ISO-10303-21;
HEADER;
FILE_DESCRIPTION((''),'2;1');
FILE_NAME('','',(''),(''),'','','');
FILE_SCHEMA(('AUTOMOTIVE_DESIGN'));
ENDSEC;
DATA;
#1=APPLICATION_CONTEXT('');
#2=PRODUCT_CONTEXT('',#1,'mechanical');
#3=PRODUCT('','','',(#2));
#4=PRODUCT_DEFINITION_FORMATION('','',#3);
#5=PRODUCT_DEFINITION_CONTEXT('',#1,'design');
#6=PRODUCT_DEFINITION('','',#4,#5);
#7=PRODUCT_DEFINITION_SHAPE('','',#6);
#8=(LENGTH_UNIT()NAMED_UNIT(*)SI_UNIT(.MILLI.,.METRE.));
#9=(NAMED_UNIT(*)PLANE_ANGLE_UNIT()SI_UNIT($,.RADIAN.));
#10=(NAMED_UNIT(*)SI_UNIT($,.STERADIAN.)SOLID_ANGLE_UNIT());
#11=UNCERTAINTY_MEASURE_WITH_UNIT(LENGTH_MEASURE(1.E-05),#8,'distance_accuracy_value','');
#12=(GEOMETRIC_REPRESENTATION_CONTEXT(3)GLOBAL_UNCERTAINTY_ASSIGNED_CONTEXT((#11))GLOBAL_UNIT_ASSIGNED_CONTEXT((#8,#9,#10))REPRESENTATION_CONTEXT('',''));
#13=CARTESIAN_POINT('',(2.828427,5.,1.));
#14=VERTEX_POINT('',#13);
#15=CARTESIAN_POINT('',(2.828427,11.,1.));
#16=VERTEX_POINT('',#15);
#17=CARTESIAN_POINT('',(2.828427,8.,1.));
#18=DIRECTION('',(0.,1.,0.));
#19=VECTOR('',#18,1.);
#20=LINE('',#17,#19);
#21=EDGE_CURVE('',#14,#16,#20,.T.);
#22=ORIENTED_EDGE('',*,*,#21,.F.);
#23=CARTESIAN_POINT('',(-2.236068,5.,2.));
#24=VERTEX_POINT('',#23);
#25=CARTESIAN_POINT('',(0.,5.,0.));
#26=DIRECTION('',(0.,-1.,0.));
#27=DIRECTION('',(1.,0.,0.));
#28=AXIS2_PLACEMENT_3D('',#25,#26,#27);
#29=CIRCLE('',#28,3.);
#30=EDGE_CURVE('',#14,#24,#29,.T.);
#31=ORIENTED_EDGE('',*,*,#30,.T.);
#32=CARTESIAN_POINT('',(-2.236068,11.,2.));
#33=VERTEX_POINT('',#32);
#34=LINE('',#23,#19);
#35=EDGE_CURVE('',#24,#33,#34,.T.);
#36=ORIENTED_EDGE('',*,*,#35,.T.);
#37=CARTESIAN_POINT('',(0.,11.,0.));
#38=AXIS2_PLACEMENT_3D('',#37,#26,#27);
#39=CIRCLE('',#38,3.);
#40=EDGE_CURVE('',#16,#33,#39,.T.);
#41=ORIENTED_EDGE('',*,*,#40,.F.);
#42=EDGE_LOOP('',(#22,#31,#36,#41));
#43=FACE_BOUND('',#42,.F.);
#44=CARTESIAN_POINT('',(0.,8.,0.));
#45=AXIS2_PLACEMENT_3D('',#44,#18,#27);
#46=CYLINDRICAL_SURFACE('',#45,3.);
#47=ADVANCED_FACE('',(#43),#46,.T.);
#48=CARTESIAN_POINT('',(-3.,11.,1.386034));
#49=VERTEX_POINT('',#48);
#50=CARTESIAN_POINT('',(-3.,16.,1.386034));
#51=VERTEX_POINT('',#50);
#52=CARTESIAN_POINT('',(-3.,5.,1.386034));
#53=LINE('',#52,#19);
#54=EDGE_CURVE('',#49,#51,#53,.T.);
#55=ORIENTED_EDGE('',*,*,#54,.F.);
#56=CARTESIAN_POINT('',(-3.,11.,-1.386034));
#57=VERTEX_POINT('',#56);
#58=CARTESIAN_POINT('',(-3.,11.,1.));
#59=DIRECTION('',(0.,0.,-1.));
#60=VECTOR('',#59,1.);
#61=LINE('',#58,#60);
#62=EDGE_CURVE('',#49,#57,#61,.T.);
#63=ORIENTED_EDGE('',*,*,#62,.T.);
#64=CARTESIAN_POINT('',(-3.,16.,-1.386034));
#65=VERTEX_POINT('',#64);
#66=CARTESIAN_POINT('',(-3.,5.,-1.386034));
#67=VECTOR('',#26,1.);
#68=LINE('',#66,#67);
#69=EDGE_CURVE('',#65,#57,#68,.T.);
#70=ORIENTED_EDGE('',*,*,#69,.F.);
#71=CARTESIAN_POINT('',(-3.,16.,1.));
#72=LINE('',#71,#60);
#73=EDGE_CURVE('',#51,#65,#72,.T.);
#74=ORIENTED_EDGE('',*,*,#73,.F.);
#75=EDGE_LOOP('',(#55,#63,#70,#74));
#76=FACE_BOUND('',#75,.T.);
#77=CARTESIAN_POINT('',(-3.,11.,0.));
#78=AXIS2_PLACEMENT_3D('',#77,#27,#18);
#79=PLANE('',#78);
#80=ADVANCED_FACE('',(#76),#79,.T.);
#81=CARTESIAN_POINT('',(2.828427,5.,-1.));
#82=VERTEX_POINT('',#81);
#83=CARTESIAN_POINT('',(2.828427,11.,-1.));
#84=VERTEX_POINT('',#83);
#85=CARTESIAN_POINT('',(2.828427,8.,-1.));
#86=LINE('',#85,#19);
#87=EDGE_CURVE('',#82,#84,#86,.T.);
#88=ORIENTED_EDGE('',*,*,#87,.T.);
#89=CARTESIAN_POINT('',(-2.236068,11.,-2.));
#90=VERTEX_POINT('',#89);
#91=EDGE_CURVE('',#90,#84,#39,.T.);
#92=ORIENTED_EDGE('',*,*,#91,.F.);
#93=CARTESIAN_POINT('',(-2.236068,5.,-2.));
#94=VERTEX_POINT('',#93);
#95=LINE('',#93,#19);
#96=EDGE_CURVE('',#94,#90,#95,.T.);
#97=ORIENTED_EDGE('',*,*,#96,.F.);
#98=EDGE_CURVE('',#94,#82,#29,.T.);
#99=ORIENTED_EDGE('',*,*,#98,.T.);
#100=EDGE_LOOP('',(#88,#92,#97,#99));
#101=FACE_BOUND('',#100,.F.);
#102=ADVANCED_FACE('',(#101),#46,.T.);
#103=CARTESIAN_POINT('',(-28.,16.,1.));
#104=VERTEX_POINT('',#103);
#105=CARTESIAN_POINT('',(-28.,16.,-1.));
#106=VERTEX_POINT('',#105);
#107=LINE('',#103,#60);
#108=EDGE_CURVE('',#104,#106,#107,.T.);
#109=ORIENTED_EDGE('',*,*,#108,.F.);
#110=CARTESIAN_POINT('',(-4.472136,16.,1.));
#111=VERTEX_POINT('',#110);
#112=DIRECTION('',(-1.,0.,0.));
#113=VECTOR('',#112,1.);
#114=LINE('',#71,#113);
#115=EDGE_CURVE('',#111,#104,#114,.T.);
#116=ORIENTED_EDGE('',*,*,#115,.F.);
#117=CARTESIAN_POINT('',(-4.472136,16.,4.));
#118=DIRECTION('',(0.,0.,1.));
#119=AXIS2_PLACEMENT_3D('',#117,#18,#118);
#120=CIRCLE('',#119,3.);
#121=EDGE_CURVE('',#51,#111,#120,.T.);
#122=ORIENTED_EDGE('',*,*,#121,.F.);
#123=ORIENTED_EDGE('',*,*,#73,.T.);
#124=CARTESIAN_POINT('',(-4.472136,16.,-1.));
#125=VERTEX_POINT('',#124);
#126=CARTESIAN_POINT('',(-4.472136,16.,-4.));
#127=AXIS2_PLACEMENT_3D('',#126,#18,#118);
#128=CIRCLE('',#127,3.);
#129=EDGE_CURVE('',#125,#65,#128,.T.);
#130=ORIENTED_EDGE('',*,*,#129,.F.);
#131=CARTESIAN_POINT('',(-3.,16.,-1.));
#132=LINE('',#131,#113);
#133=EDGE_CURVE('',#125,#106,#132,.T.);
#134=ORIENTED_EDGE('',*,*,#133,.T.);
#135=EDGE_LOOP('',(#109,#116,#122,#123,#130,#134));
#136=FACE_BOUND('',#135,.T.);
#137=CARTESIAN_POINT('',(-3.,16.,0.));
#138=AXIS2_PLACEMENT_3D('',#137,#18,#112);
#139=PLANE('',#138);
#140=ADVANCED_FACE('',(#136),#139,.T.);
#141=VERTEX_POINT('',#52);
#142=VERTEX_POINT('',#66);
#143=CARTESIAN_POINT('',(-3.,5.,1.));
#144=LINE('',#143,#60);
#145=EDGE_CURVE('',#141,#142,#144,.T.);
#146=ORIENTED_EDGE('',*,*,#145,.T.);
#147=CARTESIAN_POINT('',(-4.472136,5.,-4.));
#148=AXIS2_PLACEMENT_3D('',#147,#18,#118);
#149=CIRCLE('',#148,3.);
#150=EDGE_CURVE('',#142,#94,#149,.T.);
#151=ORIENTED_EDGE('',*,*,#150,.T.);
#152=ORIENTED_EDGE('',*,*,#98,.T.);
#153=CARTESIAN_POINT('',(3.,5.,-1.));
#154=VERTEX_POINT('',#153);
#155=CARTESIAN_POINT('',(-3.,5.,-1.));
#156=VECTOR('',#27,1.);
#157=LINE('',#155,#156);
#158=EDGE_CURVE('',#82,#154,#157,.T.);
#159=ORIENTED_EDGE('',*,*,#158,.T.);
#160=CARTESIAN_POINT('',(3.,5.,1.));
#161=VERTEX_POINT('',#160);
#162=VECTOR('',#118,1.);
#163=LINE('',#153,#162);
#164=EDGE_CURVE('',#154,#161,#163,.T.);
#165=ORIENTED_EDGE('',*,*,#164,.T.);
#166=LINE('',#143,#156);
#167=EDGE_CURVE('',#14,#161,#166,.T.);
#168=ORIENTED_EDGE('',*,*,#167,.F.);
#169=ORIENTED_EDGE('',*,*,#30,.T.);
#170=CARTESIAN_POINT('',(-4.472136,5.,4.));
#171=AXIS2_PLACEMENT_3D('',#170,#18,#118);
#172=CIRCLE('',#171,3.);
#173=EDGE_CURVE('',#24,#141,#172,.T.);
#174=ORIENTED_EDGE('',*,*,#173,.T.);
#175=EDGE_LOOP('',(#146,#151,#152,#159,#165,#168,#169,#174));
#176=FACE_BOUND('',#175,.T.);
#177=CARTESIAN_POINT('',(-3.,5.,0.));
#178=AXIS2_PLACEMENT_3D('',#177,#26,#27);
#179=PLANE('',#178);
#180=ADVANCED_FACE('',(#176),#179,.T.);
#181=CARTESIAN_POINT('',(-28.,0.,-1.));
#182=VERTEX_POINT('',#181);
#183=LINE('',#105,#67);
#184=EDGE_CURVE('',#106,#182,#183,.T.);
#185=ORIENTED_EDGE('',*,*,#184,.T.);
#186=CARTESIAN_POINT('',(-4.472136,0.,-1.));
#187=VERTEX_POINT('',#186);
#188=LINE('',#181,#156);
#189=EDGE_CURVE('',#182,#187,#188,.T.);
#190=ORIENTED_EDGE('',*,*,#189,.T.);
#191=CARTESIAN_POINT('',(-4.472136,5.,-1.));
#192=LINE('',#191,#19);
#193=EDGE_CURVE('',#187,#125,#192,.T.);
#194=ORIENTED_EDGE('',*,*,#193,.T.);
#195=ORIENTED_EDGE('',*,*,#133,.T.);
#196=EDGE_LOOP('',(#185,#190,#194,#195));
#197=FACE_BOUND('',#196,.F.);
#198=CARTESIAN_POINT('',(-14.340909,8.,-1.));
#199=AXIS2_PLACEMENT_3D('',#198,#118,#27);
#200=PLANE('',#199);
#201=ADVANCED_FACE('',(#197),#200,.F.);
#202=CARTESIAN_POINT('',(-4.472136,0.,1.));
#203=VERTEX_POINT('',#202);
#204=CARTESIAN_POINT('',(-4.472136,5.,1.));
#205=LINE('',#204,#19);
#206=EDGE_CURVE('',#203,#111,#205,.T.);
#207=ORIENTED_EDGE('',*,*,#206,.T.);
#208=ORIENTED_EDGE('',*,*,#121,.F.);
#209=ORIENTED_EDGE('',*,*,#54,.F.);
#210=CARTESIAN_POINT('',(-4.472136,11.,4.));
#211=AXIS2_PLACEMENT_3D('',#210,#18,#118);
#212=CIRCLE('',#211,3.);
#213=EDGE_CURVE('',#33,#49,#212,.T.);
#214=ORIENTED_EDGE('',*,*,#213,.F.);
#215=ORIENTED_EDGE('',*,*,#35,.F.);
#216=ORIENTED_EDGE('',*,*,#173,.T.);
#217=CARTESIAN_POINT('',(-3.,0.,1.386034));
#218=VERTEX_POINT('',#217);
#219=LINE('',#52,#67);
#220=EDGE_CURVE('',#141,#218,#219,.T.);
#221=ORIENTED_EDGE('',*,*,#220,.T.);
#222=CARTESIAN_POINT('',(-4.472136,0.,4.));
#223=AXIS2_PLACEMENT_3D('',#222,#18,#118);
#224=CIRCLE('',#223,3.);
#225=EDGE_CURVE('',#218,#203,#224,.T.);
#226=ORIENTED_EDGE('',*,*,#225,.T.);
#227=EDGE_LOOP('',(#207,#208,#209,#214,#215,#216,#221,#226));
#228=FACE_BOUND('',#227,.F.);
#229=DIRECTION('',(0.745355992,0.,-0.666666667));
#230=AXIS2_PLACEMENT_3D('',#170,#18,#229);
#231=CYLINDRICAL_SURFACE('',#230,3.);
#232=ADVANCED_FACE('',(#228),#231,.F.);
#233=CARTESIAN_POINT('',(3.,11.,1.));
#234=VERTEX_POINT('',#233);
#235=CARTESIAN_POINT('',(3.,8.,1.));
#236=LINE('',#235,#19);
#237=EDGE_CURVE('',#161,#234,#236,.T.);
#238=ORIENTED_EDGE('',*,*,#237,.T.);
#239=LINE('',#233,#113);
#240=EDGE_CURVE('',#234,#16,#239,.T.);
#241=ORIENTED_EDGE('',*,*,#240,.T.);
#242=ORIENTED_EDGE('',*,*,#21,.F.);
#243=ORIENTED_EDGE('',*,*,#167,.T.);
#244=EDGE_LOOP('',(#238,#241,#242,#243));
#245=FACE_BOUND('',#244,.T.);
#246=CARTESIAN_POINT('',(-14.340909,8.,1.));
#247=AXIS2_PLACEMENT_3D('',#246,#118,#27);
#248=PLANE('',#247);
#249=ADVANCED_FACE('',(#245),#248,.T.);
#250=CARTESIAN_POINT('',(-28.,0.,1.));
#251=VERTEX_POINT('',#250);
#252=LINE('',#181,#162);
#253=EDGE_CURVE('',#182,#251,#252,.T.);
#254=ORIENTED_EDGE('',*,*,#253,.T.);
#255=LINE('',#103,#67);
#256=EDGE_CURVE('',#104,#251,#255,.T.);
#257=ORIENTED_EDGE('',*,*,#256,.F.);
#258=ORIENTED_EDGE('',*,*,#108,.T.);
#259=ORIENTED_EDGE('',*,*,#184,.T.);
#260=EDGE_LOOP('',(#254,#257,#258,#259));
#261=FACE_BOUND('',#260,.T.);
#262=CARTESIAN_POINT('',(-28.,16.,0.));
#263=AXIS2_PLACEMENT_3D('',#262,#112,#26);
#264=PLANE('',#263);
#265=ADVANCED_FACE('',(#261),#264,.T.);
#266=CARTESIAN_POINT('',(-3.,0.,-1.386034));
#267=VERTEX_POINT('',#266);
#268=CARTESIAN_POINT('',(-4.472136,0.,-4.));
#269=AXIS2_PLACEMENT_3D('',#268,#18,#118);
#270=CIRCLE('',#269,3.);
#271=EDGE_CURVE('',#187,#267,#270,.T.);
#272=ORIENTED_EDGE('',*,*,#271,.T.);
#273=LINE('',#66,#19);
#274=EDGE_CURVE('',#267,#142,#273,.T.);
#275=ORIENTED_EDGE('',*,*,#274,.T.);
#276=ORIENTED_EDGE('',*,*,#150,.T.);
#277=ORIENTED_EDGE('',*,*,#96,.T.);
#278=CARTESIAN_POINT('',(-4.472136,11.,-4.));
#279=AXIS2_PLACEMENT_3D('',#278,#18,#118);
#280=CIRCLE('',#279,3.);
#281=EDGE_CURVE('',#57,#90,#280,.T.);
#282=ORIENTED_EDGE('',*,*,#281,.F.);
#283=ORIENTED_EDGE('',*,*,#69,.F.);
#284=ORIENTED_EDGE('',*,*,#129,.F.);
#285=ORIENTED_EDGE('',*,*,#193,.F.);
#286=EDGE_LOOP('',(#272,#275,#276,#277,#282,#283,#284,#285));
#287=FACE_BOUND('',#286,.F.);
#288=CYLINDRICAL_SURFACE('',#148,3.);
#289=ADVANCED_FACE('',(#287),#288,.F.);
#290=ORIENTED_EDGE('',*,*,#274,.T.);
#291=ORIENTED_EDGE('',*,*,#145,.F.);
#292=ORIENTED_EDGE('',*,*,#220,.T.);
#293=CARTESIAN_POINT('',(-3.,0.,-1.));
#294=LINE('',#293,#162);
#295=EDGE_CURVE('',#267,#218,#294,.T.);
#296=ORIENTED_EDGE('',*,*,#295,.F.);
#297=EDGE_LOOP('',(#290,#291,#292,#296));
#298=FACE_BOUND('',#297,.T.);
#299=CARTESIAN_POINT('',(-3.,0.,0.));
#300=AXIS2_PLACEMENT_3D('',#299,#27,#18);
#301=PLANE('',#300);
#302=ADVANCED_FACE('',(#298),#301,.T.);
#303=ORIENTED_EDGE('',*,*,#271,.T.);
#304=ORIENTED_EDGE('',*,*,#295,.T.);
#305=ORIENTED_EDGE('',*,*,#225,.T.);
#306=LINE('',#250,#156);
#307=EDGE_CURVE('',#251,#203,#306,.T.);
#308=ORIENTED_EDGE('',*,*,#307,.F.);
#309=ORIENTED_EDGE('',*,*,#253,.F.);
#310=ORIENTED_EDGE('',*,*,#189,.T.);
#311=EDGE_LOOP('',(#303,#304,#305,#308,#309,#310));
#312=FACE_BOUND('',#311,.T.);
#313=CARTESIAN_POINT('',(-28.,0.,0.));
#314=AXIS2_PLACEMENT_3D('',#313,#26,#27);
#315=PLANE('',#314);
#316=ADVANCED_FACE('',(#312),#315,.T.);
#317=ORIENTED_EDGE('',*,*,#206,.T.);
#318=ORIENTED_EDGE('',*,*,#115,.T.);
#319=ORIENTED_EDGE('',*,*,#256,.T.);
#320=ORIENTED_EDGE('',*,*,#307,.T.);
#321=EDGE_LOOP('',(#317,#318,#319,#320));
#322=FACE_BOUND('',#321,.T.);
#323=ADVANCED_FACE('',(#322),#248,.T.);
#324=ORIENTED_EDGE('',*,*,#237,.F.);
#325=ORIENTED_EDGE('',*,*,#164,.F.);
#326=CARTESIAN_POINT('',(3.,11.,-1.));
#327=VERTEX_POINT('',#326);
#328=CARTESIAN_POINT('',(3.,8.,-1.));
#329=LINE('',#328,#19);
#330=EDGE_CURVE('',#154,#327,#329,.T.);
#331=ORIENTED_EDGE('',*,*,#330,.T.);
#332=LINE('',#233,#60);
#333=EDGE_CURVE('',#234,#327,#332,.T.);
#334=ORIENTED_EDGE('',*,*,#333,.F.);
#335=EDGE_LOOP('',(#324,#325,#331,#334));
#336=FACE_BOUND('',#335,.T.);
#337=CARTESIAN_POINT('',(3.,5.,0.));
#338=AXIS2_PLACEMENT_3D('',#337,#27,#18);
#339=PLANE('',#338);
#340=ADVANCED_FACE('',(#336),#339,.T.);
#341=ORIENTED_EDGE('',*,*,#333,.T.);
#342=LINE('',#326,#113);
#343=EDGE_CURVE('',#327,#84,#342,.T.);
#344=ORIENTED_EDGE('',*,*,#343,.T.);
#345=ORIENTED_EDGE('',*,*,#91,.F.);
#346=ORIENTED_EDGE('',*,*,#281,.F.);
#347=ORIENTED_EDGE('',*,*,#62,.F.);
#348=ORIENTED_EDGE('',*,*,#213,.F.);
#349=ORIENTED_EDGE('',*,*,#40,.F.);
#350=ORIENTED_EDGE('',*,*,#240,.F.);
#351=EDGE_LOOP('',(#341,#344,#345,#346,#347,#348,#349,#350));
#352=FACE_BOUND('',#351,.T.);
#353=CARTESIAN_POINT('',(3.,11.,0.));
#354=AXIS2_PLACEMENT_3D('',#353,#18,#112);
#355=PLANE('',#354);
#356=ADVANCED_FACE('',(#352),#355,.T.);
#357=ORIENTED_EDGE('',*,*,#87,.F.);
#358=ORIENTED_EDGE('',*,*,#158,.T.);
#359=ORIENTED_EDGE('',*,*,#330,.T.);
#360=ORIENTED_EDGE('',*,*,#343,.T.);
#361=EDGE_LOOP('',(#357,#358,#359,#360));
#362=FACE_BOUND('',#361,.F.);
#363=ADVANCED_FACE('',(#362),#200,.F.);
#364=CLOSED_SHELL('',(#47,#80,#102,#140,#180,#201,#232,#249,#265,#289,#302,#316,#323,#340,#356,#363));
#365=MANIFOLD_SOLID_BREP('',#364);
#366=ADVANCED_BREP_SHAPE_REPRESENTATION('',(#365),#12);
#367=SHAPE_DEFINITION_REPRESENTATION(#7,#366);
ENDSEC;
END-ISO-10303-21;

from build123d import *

# Parameters (mm, degrees)
F0_W     = 3
F0_H     = 6
F3_DEPTH = 1
F4_D     = 1
F6_R     = 3


with BuildPart() as f2:
    # F0 (on Top) → F2 (revolve)
    with BuildSketch(Plane.XY):
        with Locations((1.5, 8)):
            Rectangle(F0_W, F0_H)
    revolve(axis=Axis((0, 8, 0), (0, -1, 0)))

    # F4 (through all)
    with Locations(Plane.XZ):
        with Locations((0, 0)):
            Hole(F4_D / 2)


with BuildPart() as f3:
    # F0 (on Top) → F3 (new body, symmetric)
    with BuildSketch(Plane.XY):
        Polygon((-28, 16), (-28, 0), (-3, 0), (-3, 5), (0, 5), (0, 11), (-3, 11), (-3, 16), align=None)
        with Locations((1.5, 8)):
            Rectangle(F0_W, F0_H)
    extrude(amount=F3_DEPTH, both=True)


with BuildPart() as f2_1:
    add(f2.part)

    # F5: union F3
    add(f3.part)

    # F6 (call 1 of 2: OpenCascade refuses the feature's edges together)
    f6_edges = [f2_1.edges().sort_by_distance(p)[0] for p in [
        (-2.828427, 8, 1),
    ]]
    fillet(f6_edges, radius=F6_R)

    # F6#2 (call 2 of 2)
    f6_2_edges = [f2_1.edges().sort_by_distance(p)[0] for p in [
        (-2.828427, 8, -1),
    ]]
    fillet(f6_2_edges, radius=F6_R)


solid = f2_1.part
